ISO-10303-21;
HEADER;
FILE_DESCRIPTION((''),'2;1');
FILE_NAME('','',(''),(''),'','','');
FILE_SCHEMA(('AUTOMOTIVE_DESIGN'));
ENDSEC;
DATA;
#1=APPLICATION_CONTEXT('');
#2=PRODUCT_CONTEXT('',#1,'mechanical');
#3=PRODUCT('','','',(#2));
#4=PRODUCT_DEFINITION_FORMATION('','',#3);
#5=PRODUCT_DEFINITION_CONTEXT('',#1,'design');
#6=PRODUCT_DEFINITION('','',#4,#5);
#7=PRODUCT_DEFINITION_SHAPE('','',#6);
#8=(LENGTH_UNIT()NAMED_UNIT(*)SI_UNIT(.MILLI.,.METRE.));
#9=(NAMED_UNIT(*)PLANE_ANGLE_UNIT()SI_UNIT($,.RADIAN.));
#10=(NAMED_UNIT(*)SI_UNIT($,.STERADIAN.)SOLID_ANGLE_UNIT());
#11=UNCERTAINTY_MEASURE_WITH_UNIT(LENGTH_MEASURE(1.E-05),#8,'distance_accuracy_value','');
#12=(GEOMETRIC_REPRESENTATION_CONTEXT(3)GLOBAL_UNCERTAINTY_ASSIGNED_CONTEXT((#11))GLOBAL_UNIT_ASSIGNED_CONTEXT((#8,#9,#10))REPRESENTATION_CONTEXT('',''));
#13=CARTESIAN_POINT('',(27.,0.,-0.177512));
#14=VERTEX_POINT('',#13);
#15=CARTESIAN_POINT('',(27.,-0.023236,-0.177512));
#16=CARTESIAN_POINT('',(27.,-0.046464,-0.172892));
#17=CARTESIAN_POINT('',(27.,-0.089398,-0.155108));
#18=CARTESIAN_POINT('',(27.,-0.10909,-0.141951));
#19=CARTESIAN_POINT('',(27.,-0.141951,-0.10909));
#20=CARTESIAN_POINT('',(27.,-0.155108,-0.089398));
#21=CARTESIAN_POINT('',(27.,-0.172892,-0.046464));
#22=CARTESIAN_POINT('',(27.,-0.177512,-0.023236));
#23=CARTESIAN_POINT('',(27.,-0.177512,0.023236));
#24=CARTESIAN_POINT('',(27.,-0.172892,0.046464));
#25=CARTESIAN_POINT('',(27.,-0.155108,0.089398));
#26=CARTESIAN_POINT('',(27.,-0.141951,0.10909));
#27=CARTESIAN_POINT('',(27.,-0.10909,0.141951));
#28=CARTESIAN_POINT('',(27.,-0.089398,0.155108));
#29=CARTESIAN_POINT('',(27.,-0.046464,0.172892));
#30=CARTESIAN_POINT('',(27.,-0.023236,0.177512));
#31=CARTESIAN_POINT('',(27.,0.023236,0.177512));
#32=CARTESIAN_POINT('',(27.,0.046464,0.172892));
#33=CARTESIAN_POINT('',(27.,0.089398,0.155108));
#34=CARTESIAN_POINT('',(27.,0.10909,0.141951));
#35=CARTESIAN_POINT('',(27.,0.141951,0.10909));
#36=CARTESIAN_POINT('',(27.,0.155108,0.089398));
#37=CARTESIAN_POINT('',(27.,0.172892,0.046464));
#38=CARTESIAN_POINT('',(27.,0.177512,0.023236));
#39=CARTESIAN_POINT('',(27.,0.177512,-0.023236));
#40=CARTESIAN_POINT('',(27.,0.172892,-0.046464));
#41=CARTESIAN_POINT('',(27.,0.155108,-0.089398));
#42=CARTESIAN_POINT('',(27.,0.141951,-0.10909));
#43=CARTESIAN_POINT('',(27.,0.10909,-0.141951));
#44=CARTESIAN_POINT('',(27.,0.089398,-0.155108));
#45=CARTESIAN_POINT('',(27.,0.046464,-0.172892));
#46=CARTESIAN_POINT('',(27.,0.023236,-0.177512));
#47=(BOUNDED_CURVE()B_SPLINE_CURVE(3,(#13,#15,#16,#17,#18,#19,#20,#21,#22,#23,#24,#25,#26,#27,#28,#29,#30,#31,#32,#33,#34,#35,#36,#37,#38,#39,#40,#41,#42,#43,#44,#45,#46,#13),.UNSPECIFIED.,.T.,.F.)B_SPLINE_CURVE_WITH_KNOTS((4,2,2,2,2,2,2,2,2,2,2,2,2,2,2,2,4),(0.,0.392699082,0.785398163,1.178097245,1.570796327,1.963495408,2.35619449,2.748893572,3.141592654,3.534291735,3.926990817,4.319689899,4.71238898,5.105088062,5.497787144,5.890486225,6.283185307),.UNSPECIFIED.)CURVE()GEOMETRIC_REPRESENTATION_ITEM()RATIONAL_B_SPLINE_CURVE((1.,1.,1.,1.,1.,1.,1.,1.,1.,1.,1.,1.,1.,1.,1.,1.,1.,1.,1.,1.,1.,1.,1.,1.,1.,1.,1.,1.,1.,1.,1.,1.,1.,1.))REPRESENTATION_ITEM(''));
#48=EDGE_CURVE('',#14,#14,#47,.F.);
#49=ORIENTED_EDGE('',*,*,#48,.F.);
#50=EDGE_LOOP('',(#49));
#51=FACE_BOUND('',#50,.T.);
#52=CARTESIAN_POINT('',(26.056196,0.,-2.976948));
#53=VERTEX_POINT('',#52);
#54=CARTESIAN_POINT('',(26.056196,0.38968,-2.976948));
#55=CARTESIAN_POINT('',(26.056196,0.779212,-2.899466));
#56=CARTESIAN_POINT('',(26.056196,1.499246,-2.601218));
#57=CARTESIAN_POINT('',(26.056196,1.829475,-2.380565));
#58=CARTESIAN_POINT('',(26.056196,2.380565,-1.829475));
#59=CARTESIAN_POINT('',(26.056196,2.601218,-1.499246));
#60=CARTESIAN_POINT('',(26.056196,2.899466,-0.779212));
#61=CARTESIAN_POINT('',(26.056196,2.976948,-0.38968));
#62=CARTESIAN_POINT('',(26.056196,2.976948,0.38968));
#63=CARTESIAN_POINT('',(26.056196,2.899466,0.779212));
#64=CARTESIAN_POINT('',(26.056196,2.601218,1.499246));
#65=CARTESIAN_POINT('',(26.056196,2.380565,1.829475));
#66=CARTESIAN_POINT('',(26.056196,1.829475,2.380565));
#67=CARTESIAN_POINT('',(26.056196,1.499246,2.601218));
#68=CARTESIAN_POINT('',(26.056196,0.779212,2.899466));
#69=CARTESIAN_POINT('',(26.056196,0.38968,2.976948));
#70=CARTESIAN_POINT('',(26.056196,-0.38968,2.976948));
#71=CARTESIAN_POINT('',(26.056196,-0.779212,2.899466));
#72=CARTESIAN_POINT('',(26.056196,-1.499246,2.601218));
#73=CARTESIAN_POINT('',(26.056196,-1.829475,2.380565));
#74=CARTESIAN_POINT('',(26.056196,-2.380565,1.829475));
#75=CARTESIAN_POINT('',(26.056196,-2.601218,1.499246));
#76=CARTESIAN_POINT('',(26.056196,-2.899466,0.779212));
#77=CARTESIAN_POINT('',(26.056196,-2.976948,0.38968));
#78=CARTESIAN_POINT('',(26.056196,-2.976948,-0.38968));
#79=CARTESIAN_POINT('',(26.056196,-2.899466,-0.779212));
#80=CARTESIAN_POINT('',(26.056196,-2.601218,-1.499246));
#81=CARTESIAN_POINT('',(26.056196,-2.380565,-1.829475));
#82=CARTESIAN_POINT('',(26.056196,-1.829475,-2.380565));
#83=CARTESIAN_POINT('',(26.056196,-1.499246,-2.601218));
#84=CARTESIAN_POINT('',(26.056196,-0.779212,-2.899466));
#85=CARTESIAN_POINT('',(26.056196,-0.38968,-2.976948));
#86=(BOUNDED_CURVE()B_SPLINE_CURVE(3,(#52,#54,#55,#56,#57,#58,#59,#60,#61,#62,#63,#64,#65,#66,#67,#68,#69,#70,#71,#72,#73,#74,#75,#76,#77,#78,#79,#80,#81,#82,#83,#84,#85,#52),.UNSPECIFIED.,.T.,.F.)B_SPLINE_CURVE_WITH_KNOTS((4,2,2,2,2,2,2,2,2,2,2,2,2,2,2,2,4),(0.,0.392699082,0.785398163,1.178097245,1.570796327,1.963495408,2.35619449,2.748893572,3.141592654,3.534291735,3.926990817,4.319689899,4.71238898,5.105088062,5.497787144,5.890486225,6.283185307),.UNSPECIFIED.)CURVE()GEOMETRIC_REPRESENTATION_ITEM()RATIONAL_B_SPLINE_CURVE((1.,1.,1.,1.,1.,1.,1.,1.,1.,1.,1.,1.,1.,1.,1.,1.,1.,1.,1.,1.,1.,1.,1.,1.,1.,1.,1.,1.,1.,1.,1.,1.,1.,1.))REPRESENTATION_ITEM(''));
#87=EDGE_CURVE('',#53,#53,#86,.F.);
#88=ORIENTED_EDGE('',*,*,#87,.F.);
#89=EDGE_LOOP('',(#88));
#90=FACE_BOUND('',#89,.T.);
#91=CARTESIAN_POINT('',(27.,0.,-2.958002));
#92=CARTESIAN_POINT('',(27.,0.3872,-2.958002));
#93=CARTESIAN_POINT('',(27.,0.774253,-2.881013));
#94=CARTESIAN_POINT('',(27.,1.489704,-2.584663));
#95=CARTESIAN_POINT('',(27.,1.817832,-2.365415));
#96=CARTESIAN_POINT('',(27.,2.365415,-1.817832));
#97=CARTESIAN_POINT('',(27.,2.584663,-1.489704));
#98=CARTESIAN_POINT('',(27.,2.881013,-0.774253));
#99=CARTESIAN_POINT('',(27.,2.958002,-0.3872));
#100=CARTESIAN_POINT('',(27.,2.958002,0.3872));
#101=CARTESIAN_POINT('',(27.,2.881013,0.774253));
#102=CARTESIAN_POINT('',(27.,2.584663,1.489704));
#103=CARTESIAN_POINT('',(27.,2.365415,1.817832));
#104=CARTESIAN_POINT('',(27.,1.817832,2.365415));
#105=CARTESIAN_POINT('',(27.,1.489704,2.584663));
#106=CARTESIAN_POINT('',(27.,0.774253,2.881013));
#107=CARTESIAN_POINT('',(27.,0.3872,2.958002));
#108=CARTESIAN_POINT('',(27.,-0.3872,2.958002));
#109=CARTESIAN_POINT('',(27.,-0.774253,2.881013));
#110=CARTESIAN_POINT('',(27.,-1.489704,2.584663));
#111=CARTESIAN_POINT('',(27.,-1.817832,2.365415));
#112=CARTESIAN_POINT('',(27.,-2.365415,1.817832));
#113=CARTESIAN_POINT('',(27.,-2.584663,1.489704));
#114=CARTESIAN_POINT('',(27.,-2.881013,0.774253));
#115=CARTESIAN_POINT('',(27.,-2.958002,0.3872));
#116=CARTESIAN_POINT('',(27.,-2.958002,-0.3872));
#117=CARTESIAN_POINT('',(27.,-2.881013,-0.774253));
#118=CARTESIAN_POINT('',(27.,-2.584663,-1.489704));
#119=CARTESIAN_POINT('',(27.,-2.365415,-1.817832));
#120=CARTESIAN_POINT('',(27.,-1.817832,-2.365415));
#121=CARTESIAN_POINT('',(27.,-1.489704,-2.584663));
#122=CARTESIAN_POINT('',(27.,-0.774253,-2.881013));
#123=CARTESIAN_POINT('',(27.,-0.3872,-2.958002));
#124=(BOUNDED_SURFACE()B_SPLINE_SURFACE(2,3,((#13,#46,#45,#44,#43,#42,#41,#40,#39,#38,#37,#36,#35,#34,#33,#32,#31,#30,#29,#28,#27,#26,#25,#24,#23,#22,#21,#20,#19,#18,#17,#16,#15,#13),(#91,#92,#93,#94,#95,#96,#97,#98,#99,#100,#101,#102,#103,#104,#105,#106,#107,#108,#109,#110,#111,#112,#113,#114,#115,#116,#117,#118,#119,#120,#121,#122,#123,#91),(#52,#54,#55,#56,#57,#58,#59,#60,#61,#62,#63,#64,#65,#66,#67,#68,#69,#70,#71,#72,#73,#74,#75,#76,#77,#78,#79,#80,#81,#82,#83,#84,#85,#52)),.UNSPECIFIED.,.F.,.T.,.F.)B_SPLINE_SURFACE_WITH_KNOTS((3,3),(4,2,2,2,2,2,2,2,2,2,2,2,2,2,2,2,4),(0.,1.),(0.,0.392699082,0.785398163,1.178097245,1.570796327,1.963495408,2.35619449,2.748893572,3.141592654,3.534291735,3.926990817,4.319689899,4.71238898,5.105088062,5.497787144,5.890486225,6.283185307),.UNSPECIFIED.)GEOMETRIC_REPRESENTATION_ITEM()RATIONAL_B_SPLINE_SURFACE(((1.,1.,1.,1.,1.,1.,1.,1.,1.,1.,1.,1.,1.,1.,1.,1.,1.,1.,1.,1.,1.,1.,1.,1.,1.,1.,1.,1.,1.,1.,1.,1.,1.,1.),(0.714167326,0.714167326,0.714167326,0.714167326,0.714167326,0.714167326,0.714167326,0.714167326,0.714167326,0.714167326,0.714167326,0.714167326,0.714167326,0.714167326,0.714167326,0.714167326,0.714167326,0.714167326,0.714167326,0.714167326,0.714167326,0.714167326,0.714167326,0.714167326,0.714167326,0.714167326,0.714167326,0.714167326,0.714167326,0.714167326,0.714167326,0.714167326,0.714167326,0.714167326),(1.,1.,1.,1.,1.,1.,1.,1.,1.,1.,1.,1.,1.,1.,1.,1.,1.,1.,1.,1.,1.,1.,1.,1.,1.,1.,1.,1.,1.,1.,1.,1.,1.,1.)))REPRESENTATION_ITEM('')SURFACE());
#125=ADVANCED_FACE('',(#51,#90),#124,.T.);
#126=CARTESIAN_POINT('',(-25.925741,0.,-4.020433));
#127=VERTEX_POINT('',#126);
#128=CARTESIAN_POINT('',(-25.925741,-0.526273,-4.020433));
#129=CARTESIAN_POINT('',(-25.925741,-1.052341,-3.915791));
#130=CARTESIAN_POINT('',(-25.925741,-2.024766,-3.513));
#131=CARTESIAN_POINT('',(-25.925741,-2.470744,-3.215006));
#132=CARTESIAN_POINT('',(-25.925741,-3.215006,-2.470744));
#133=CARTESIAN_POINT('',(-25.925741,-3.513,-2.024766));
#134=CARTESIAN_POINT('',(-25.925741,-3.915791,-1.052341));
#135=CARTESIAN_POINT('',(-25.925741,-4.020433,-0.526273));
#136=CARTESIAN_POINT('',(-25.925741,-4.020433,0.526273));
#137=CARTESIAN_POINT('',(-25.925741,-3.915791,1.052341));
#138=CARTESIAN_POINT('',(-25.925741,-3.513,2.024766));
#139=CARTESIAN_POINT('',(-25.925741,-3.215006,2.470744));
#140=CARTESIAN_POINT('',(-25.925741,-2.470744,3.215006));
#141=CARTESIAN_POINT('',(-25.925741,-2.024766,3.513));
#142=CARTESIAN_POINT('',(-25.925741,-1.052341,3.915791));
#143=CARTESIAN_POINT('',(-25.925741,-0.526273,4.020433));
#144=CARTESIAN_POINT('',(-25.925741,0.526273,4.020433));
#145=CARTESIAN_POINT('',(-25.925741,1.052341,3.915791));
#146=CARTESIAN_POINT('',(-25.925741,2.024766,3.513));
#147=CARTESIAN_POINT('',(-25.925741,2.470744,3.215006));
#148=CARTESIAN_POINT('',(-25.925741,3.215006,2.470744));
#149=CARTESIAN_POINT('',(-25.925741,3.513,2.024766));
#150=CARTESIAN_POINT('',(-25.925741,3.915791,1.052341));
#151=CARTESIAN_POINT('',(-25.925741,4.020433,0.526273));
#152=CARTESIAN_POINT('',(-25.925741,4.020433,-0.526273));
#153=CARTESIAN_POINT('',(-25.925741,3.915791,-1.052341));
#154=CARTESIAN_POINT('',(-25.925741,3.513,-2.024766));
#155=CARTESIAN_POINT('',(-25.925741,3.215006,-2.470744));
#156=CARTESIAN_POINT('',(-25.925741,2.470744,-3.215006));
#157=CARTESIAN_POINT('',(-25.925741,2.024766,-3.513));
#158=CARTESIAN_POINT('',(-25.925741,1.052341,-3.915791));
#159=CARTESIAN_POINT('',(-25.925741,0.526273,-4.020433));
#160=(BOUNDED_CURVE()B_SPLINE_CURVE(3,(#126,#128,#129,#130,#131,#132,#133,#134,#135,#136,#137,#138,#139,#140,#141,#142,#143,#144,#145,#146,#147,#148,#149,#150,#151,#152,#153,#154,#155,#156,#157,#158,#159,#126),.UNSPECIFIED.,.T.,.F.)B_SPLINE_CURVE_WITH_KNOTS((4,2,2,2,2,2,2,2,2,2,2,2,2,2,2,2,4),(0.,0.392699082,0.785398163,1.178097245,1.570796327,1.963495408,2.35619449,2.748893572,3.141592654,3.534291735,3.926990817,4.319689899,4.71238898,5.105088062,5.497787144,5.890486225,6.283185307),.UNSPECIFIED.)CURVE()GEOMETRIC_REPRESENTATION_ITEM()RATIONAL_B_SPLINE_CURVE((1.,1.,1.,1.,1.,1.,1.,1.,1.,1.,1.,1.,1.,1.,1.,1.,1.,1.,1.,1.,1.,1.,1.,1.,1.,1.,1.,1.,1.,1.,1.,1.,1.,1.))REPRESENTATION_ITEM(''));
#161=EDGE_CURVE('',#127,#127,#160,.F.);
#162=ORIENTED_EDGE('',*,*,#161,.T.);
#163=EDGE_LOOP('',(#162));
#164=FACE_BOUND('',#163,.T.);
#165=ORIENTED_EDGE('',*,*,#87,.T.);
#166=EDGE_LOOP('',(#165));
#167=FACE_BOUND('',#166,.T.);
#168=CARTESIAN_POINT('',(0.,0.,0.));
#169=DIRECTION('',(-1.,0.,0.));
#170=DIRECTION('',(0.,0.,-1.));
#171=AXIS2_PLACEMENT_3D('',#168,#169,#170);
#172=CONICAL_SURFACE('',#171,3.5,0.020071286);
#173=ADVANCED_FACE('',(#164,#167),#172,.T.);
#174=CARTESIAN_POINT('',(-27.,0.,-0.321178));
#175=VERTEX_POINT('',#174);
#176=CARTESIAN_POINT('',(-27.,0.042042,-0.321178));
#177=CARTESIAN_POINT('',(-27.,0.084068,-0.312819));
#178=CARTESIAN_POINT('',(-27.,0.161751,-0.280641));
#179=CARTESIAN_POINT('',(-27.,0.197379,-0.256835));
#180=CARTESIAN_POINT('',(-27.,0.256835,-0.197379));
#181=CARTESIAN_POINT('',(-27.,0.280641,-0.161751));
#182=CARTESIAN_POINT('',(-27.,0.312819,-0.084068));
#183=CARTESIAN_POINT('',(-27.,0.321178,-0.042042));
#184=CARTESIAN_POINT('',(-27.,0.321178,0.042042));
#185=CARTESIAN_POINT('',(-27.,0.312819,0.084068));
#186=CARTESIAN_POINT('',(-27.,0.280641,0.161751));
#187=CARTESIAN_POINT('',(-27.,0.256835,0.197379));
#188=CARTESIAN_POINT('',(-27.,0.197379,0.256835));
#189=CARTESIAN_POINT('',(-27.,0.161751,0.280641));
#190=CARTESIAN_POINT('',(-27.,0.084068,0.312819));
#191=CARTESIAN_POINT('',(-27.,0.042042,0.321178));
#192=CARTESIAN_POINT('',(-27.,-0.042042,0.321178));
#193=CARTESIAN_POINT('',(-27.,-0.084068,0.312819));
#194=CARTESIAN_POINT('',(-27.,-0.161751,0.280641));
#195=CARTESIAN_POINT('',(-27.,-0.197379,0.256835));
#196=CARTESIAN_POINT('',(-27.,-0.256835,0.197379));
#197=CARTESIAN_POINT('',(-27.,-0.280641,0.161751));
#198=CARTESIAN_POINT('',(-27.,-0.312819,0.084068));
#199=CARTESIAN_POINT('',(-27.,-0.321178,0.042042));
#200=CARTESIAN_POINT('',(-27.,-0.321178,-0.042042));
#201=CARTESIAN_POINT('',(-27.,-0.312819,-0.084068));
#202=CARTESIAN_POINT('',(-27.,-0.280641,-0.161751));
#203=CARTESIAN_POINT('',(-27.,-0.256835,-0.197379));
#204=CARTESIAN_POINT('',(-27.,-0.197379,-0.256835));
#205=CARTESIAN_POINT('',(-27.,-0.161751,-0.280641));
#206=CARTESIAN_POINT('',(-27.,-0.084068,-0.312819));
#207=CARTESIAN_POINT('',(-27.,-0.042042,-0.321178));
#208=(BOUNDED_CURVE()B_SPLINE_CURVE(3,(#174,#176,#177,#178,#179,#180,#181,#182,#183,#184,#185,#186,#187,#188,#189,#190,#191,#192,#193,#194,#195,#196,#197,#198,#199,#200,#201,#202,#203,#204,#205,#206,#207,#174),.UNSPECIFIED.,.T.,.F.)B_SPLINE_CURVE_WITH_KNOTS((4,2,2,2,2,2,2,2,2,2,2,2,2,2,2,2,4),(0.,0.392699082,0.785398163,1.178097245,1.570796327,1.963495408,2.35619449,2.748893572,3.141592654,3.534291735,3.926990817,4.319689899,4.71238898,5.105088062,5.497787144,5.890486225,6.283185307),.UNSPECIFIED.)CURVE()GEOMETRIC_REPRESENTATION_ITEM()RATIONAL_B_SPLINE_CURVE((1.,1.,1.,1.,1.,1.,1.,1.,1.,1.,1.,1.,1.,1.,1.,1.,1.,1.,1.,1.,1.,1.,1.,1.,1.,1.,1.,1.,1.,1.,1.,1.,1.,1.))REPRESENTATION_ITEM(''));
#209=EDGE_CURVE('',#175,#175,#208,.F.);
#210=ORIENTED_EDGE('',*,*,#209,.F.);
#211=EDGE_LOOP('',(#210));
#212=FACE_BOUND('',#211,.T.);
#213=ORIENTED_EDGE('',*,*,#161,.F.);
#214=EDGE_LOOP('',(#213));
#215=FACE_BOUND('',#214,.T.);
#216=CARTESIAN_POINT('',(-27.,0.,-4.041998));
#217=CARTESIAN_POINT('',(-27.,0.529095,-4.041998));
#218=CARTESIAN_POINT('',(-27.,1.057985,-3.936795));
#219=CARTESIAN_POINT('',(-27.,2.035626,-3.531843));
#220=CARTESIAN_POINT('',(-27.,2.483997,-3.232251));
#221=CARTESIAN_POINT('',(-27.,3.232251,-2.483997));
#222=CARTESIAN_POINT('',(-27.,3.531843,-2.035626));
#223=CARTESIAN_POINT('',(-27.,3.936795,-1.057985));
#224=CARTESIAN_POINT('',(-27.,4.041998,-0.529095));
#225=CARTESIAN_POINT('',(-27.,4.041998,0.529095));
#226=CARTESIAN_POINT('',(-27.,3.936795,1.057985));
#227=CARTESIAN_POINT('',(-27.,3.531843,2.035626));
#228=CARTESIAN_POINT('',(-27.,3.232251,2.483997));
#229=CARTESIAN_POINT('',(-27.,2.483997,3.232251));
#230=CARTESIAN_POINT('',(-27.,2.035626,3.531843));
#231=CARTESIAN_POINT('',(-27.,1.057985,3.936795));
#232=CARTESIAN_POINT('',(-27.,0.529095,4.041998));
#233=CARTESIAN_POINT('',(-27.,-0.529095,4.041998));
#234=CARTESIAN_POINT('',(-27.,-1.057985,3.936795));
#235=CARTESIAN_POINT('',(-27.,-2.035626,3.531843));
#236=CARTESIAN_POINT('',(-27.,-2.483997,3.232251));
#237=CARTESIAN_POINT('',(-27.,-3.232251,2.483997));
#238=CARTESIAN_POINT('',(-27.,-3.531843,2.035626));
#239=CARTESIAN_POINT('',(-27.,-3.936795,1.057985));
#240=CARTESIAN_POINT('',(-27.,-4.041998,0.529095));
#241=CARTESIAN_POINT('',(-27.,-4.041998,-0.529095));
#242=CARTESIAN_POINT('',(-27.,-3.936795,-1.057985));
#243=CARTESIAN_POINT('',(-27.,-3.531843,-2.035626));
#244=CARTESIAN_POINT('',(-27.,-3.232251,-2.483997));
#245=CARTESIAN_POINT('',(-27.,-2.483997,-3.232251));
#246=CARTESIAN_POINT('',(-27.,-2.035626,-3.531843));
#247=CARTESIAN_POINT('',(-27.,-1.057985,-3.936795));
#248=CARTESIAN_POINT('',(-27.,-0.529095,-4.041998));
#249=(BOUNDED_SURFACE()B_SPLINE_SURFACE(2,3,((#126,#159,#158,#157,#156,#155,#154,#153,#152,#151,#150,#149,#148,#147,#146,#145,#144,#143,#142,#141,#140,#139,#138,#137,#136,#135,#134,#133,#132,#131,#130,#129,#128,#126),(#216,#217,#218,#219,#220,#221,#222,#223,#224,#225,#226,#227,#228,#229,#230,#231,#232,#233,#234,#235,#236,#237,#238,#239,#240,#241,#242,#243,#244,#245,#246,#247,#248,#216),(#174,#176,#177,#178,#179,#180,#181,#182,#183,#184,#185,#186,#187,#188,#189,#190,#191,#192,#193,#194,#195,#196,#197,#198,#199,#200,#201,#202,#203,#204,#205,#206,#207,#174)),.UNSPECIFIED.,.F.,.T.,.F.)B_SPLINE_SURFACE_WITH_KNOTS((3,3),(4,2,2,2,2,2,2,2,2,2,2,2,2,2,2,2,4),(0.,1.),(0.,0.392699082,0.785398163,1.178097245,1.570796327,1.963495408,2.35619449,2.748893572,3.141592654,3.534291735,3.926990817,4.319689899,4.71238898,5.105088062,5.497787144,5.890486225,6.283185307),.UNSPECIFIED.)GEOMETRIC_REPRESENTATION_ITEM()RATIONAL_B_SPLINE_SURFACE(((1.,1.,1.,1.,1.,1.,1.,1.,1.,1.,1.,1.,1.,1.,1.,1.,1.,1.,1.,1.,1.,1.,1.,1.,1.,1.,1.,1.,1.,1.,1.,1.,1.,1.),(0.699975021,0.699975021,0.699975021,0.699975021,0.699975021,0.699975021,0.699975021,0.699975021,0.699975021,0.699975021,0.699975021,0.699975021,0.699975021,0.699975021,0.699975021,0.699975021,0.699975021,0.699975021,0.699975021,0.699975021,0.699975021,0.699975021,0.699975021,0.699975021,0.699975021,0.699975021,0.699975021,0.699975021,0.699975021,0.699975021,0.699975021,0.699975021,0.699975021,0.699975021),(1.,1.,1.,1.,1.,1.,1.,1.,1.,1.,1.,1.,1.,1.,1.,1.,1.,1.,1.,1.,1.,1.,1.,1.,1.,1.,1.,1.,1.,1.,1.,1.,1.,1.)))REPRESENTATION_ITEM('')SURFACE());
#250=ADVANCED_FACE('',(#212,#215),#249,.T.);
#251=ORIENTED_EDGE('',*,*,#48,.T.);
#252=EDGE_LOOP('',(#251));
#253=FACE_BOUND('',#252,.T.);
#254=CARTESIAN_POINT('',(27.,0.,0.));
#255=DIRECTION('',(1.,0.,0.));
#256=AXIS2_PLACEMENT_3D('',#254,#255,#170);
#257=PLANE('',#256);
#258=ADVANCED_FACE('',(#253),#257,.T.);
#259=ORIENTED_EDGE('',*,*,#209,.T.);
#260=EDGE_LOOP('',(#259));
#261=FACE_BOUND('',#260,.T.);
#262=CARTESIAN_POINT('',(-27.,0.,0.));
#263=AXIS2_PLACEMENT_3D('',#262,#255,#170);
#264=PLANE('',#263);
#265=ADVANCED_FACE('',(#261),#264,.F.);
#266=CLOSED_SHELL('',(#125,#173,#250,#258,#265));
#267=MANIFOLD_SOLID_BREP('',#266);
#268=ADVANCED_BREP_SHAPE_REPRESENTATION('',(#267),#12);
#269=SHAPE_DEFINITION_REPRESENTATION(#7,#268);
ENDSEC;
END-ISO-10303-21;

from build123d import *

# Parameters (mm, degrees)
SKETCH1_R                     = 3.5
BOSS_EXTRUDE1_DEPTH           = 27
BOSS_EXTRUDE1_TAPER           = 1.15
BOSS_EXTRUDE1_OTHER_WAY_DEPTH = 27
BOSS_EXTRUDE1_OTHER_WAY_TAPER = -1.15


with BuildPart() as part:
    # Sketch1 → Boss-Extrude1 (new body)
    with BuildSketch(Plane(origin=(0, 0, 0), x_dir=(0, 0, -1), z_dir=(1, 0, 0))):
        Circle(SKETCH1_R)
    extrude(amount=BOSS_EXTRUDE1_DEPTH, taper=BOSS_EXTRUDE1_TAPER)

    # Sketch1 → Boss-Extrude1 other way (add)
    with BuildSketch(Plane(origin=(0, 0, 0), x_dir=(0, 0, -1), z_dir=(1, 0, 0))):
        Circle(SKETCH1_R)
    extrude(amount=-BOSS_EXTRUDE1_OTHER_WAY_DEPTH, taper=BOSS_EXTRUDE1_OTHER_WAY_TAPER)

    # Fillet1
    # an asymmetric fillet: 3.7, 1 mm, written as the material it takes off along each edge
    with BuildSketch(Plane(origin=(-27, 0, 0), x_dir=(0, 0, -1), z_dir=(0, -1, 0))) as fillet1_piece_1:
        with BuildLine():
            Bezier((4.020432866, 1.074258773), (4.041997517, 0), (0.321178125, 0), weights=[1, 0.699975021, 1])
            Line((0.321178125, 0), (4.041997517, 0))
            Line((4.041997517, 0), (4.020432866, 1.074258773))
        make_face()
    revolve(axis=Axis((-27, 0, 0), (1, 0, 0)), mode=Mode.SUBTRACT)

    # Fillet2
    # an asymmetric fillet: 2.8, 1 mm, written as the material it takes off along each edge
    with BuildSketch(Plane(origin=(27, 0, 0), x_dir=(0, 0, -1), z_dir=(0, 1, 0))) as fillet2_piece_1:
        with BuildLine():
            Bezier((2.976948391, 0.943804171), (2.958002483, 0), (0.177512371, 0), weights=[1, 0.714167326, 1])
            Line((0.177512371, 0), (2.958002483, 0))
            Line((2.958002483, 0), (2.976948391, 0.943804171))
        make_face()
    revolve(axis=Axis((27, 0, 0), (-1, 0, 0)), mode=Mode.SUBTRACT)


solid = part.part
